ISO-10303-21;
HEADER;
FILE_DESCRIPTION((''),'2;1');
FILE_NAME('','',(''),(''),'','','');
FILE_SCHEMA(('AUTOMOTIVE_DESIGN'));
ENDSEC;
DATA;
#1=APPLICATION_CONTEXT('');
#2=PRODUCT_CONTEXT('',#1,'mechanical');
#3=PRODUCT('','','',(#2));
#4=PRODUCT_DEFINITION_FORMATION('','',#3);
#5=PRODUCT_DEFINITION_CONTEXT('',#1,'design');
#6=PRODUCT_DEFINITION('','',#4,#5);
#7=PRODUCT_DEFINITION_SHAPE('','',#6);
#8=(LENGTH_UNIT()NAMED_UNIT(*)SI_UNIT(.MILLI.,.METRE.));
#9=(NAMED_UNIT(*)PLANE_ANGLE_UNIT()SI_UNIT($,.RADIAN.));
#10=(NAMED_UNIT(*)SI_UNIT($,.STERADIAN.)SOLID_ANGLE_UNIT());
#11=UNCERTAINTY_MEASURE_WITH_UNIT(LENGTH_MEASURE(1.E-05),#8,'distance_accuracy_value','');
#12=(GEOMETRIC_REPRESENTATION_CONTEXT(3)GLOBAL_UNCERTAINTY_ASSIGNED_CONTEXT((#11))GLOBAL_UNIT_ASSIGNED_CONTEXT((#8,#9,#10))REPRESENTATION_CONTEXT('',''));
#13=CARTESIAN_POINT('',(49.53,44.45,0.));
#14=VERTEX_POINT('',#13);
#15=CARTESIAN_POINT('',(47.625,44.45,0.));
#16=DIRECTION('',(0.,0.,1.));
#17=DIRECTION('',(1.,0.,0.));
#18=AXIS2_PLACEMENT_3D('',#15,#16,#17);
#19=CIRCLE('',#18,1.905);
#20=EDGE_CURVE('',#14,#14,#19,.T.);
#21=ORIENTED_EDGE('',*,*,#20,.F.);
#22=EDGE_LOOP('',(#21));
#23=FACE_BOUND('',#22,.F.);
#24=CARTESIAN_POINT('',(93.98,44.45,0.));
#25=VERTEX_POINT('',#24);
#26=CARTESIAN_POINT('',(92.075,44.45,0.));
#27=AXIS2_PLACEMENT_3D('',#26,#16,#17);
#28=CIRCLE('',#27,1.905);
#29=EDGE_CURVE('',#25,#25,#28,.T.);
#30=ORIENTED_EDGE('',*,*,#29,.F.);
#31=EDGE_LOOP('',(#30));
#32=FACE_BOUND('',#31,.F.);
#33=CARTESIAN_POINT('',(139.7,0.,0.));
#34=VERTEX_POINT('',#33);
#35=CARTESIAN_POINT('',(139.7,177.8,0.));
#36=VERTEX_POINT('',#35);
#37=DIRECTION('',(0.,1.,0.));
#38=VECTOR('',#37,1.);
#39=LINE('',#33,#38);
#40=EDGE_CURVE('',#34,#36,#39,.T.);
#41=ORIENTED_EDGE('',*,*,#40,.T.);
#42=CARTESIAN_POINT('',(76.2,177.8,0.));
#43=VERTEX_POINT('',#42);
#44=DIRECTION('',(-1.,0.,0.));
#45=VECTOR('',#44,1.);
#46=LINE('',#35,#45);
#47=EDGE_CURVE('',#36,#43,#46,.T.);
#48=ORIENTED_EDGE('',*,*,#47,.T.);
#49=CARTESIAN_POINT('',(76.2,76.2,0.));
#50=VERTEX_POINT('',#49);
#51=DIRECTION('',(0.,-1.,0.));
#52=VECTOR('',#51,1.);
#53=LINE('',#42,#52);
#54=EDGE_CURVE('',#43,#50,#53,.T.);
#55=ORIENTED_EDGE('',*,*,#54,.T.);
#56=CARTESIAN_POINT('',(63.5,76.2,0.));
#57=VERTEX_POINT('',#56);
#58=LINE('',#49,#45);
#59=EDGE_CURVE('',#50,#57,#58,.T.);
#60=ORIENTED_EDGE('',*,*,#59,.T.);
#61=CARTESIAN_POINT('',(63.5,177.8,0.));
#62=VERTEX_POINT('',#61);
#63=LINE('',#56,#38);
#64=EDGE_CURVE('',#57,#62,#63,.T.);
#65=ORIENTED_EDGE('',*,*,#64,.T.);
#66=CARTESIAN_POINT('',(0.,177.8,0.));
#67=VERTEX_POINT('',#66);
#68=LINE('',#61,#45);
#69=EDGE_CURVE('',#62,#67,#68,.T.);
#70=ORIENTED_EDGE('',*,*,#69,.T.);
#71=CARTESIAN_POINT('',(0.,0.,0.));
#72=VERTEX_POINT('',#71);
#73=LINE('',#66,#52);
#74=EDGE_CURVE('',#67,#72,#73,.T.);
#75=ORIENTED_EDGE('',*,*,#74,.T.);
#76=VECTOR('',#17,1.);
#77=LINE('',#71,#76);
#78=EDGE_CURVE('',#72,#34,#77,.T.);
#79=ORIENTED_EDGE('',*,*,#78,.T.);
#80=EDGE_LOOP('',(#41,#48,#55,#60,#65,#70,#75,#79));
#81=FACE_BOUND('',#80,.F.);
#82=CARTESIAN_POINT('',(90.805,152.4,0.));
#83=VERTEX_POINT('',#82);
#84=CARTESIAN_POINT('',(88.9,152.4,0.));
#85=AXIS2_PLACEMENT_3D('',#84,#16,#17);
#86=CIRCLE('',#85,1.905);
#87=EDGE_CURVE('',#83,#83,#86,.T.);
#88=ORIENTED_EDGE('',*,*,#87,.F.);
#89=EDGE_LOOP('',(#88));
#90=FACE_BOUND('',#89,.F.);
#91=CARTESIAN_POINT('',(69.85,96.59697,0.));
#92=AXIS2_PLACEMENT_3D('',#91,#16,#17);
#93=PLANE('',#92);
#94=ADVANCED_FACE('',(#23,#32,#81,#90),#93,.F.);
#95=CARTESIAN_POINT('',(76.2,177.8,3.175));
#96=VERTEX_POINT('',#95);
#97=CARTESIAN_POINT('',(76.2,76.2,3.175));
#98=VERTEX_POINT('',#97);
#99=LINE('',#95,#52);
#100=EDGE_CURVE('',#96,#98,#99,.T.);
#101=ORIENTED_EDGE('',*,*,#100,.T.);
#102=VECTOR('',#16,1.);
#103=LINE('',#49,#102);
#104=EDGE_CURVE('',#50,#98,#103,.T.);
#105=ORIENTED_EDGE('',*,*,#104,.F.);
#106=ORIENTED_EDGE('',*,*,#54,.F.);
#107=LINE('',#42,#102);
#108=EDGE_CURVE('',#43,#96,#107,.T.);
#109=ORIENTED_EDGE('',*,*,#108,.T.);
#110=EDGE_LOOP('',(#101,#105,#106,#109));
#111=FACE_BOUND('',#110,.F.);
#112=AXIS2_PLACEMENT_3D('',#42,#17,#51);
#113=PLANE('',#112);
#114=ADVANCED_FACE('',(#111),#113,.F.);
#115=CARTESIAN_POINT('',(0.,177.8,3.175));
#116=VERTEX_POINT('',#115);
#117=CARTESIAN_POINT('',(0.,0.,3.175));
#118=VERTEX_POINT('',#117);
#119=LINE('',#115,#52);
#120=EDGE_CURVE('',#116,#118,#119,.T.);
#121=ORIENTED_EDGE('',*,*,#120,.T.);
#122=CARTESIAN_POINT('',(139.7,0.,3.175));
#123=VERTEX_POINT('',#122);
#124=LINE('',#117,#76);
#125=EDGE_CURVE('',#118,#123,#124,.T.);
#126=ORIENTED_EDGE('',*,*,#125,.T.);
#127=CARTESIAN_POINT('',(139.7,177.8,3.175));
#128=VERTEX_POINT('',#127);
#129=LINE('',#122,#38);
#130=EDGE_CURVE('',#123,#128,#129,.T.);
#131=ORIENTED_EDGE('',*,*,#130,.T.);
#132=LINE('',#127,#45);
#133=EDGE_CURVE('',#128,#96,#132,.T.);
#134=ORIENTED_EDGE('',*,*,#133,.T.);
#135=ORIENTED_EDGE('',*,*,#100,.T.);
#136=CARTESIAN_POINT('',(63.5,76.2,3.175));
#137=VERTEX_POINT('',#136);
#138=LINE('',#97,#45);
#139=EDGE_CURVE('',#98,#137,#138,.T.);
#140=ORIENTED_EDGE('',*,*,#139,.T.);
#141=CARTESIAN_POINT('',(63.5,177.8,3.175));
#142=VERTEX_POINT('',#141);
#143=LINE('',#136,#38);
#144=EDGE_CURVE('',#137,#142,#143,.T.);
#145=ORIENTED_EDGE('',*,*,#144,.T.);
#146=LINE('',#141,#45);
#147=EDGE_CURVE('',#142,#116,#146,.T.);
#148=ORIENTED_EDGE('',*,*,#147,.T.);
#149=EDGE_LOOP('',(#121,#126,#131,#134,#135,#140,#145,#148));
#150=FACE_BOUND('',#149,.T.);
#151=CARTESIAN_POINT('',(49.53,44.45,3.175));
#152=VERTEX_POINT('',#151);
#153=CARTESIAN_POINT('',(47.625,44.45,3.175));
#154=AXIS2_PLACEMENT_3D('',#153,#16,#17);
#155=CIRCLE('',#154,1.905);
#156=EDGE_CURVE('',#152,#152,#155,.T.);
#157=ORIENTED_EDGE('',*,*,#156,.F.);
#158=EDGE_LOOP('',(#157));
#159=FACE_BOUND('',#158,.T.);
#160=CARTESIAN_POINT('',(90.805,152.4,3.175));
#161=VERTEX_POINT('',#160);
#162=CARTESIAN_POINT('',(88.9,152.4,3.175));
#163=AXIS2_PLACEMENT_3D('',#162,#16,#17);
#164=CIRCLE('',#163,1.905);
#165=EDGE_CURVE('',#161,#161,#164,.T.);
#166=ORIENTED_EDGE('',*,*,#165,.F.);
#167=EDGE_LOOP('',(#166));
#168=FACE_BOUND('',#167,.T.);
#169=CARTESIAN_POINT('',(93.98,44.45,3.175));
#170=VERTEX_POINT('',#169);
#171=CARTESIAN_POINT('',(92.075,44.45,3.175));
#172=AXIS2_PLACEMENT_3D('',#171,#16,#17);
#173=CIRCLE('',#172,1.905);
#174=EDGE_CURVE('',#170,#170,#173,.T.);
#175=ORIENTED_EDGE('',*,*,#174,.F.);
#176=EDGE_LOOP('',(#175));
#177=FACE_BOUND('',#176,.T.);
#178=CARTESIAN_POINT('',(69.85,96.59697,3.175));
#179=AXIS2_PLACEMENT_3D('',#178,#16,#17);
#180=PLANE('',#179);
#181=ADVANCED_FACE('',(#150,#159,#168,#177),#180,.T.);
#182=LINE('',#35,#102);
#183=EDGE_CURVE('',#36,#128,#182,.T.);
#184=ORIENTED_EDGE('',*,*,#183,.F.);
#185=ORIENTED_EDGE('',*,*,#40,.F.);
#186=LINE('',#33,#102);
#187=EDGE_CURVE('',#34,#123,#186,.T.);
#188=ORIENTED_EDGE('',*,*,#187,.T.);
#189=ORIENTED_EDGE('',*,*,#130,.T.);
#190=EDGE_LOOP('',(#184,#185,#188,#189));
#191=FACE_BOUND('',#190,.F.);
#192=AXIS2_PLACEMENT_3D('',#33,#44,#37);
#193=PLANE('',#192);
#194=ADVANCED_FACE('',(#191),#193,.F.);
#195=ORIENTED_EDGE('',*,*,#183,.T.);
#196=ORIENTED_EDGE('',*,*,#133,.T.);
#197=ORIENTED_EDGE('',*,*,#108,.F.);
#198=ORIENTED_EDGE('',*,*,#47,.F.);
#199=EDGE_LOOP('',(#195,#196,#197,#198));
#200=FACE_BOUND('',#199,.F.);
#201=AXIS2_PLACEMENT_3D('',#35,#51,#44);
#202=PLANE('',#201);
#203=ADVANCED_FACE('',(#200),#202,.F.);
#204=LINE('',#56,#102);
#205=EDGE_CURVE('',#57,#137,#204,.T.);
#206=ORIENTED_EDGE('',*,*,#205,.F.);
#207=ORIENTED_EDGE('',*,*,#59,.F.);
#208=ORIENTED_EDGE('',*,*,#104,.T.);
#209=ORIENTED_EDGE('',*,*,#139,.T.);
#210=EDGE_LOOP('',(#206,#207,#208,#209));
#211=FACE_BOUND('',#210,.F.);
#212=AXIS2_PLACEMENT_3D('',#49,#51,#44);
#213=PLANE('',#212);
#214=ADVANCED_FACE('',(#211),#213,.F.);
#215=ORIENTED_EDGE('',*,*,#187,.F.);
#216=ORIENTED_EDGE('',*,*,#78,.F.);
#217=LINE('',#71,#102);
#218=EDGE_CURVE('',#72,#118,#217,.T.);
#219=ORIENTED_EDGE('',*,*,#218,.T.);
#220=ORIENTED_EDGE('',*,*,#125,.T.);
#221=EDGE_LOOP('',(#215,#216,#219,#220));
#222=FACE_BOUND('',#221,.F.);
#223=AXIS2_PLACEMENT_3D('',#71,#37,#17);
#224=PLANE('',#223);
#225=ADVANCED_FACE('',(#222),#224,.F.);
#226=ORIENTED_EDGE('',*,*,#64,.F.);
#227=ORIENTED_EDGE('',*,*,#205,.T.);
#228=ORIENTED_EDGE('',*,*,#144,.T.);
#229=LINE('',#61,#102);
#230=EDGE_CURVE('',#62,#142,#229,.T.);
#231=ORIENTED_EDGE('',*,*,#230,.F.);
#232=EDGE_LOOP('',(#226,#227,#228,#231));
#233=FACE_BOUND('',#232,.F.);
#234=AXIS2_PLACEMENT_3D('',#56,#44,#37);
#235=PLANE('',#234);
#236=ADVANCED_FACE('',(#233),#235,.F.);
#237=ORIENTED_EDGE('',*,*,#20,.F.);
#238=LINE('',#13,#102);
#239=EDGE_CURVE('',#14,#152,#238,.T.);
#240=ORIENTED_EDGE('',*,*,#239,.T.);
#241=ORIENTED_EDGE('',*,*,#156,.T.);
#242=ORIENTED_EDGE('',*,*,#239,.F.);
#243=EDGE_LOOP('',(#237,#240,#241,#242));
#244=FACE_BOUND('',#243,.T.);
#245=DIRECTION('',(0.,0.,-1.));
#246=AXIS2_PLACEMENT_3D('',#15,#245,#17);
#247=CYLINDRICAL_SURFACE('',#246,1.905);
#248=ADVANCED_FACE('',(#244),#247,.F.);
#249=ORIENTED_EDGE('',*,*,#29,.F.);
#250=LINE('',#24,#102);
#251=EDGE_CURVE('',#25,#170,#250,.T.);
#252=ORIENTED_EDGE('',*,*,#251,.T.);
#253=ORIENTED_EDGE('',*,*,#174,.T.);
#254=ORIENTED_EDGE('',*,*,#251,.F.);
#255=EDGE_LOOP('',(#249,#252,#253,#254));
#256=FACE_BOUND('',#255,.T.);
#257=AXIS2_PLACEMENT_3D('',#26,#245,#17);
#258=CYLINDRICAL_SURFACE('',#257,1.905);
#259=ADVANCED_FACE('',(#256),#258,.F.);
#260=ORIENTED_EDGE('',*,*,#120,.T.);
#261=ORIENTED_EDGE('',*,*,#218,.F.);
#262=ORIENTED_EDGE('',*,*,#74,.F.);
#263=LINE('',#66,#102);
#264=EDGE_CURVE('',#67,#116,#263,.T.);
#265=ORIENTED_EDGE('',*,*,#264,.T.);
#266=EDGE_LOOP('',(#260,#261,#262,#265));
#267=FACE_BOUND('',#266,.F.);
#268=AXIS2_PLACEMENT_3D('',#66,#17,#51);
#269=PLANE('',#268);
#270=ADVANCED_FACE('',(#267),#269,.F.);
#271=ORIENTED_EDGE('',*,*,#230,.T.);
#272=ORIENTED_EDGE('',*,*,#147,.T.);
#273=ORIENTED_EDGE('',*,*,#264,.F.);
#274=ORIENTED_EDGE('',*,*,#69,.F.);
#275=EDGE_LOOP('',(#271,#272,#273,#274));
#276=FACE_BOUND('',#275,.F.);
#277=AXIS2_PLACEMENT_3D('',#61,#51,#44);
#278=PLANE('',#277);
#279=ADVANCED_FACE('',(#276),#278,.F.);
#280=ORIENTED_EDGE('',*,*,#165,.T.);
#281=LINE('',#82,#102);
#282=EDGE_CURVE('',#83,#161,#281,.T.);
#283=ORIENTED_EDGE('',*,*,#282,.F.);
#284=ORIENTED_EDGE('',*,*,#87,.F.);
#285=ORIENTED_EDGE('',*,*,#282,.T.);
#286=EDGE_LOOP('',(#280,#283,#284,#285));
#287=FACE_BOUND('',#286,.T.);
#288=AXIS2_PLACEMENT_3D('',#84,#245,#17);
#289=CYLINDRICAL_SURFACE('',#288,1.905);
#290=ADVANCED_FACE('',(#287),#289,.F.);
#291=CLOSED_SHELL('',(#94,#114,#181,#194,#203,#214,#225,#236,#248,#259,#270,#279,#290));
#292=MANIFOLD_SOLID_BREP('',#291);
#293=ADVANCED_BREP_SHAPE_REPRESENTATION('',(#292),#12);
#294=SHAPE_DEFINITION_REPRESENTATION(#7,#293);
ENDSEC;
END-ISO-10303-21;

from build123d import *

# Parameters (mm, degrees)
F0_R     = 1.905
F1_DEPTH = 3.175


# Not quite as in the source:
# - a length typed as a fraction of an inch, garbled in the dataset ("3 / 203.2 mm" for 3/8 in), is restored


with BuildPart() as f1:
    # F0 (on Top) → F1 (new body)
    with BuildSketch(Plane.XY):
        Polygon((63.5, 177.8), (0, 177.8), (0, 0), (139.7, 0), (139.7, 177.8), (76.2, 177.8), (76.2, 76.2), (63.5, 76.2), align=None)
        with Locations((47.625, 44.45)):
            Circle(F0_R, mode=Mode.SUBTRACT)
        with Locations((92.075, 44.45)):
            Circle(F0_R, mode=Mode.SUBTRACT)
        with Locations((88.9, 152.4)):
            Circle(F0_R, mode=Mode.SUBTRACT)
    extrude(amount=F1_DEPTH)


solid = f1.part
